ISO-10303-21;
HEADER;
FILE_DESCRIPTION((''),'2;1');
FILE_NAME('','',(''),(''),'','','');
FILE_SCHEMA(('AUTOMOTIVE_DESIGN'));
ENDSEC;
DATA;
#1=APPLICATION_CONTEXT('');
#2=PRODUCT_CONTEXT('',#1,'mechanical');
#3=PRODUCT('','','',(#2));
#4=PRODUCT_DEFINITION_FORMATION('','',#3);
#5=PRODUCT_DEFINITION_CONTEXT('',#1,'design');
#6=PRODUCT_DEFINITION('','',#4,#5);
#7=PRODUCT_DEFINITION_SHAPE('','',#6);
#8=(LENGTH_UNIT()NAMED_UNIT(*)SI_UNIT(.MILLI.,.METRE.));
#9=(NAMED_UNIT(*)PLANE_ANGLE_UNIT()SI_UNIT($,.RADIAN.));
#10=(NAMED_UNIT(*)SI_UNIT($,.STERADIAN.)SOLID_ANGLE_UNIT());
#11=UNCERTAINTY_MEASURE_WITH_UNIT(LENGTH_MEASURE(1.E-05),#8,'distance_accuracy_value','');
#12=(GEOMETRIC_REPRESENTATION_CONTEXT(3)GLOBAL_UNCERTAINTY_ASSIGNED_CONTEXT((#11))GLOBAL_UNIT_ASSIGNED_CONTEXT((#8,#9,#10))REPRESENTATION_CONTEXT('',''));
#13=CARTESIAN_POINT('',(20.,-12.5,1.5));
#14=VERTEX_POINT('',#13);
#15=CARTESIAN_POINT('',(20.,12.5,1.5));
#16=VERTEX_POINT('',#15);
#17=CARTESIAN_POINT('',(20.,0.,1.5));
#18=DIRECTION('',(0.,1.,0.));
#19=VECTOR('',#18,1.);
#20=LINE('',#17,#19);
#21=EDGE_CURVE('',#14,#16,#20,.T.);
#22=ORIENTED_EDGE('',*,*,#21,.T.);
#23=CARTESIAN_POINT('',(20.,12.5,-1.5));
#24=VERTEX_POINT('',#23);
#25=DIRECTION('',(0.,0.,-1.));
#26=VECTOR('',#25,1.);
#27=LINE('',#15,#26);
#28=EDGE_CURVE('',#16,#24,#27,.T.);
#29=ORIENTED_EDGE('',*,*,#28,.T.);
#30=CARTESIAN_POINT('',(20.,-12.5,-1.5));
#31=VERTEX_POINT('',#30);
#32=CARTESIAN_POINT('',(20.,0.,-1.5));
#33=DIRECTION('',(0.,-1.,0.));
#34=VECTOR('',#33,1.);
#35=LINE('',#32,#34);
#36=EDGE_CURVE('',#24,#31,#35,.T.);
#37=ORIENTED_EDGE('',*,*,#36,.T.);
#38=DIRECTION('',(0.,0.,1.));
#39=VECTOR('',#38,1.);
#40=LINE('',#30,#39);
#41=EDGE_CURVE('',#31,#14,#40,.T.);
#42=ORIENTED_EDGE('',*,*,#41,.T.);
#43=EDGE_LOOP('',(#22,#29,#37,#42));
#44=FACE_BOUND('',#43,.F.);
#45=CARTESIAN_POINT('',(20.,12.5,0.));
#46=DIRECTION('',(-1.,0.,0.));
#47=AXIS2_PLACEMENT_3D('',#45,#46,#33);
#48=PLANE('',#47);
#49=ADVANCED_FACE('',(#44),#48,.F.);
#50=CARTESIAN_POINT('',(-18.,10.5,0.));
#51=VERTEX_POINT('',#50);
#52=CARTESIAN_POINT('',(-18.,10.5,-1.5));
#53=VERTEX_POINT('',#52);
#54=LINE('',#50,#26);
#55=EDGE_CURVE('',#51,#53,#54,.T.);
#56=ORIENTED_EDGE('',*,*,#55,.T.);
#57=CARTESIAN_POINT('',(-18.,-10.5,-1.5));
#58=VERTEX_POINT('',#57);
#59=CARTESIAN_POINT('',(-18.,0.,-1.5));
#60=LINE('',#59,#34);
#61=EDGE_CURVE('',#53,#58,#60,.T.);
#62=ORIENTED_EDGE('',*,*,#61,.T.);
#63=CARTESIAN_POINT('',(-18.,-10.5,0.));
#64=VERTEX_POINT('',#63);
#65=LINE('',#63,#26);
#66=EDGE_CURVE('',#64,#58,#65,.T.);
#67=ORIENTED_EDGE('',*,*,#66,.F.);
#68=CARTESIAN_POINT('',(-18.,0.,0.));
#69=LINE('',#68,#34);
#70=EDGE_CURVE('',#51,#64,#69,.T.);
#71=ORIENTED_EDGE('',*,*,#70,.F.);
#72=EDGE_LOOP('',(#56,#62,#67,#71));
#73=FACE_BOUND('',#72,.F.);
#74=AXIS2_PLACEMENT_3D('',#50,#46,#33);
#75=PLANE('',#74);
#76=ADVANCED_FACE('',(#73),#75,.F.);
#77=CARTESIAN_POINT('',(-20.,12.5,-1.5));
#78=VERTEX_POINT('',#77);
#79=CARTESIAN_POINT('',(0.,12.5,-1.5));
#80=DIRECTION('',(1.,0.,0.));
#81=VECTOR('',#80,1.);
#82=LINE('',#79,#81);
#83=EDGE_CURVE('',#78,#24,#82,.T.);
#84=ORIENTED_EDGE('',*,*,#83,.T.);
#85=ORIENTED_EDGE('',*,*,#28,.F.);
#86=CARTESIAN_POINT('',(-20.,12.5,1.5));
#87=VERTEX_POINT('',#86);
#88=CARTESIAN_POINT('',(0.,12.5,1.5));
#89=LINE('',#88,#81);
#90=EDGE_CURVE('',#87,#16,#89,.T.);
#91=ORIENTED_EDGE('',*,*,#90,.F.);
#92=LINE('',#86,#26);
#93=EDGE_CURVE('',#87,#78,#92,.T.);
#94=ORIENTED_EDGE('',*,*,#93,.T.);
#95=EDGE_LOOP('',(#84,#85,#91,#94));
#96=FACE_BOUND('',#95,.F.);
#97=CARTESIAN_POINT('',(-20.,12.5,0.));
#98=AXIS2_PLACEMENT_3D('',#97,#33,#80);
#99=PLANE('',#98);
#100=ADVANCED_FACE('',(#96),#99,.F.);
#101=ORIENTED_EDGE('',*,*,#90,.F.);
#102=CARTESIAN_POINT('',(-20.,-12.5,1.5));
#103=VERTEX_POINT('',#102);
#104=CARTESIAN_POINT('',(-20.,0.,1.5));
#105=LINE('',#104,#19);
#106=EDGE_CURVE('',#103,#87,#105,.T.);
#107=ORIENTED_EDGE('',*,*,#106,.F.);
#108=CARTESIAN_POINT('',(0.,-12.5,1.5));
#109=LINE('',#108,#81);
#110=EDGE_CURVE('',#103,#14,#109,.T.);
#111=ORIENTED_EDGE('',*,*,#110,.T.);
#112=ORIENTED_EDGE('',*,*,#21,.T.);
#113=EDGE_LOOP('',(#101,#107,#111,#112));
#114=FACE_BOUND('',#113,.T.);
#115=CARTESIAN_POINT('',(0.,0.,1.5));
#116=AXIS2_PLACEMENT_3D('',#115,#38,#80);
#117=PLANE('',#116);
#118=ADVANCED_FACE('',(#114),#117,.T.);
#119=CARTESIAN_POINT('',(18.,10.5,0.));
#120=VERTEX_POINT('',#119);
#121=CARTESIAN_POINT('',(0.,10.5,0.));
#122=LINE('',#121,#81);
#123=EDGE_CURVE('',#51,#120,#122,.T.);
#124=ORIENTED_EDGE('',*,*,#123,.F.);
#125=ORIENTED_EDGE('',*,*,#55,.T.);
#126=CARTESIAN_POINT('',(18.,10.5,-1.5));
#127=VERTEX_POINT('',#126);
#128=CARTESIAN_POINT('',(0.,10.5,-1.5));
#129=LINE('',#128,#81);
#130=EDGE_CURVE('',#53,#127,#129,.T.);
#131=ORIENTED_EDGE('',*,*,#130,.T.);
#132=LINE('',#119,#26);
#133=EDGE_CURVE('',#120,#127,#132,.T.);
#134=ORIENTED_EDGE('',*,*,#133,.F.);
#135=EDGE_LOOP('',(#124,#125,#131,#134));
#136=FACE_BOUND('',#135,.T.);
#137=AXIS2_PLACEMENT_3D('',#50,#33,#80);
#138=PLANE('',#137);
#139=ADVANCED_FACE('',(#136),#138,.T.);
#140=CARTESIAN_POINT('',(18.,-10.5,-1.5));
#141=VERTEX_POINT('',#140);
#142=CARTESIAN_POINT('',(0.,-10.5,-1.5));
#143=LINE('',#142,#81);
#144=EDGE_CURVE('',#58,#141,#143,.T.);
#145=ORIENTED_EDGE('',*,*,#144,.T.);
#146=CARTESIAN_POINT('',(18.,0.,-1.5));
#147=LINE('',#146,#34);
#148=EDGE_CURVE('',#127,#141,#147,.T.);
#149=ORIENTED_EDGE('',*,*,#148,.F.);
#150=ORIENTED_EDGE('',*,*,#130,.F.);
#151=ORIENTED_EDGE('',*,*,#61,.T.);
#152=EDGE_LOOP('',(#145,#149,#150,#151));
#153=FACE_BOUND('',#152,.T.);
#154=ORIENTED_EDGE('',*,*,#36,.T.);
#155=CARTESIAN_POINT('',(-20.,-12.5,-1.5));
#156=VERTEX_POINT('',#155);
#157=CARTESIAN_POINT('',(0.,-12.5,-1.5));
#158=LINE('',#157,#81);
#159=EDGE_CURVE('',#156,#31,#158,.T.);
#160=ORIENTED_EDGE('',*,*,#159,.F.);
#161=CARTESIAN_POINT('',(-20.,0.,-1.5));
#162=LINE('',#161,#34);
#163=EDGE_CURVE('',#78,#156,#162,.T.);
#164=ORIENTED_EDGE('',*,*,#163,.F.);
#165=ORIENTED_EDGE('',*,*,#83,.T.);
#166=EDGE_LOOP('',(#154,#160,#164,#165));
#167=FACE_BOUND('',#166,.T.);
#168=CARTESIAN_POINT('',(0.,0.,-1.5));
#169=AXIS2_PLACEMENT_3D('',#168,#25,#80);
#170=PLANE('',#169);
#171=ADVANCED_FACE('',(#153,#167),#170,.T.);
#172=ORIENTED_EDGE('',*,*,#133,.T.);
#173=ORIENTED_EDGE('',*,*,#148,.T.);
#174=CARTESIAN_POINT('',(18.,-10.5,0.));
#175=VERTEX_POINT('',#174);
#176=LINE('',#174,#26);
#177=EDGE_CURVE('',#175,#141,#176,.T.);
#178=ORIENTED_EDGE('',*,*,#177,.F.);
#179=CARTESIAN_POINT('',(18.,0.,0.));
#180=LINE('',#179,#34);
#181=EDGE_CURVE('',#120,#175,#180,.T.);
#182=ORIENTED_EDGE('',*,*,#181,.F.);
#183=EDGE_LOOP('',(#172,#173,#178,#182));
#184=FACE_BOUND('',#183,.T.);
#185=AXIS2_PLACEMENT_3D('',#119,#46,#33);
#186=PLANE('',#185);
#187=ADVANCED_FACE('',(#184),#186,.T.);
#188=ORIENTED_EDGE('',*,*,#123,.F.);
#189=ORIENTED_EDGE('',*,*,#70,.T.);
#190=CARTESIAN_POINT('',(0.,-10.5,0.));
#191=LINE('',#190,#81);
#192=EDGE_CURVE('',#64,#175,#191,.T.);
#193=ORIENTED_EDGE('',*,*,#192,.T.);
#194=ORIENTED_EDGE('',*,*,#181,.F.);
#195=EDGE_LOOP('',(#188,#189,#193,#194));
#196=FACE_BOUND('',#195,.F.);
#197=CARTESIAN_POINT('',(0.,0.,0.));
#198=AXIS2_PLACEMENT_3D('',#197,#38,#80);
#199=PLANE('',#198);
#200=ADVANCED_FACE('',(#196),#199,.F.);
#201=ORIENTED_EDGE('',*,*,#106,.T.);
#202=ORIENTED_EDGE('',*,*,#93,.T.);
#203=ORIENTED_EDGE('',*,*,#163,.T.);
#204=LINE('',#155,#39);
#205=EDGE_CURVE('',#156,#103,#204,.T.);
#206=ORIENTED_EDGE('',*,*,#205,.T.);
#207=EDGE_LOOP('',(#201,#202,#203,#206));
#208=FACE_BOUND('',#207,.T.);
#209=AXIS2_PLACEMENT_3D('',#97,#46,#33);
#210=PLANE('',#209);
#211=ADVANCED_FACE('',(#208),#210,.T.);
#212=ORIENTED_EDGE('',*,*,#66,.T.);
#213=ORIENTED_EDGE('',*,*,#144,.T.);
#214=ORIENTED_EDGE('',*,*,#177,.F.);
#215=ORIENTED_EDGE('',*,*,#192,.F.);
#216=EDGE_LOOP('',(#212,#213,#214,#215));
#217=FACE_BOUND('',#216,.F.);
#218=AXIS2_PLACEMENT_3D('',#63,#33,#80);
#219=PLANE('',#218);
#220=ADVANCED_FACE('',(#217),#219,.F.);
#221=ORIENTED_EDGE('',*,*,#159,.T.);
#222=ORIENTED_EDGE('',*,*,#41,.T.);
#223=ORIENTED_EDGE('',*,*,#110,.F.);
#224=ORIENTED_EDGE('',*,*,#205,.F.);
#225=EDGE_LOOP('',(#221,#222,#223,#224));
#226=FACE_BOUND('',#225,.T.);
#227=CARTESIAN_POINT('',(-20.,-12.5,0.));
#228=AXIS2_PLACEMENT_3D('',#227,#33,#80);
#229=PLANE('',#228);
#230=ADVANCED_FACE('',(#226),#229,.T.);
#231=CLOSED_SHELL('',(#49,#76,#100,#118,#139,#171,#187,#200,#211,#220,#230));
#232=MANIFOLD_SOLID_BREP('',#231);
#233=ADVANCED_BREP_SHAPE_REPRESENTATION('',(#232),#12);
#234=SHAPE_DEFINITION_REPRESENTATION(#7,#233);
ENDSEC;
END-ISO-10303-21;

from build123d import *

# Parameters (mm, degrees)
F0_W     = 40
F0_H     = 25
F2_DEPTH = 1.5
F3_W     = 40
F3_H     = 25
F3_W_2   = 36
F3_H_2   = 21
F4_DEPTH = 1.5


# Not quite as in the source:
# - the program builds the solid bodies; features that only make, move or delete a surface that nothing else refers to are left out


with BuildPart() as f2:
    # F0 (on Top) → F2 (new body)
    with BuildSketch(Plane.XY):
        Rectangle(F0_W, F0_H)
    extrude(amount=F2_DEPTH)

    # F3 (on face) → F4 (join)
    with BuildSketch(Plane(origin=(0, 0, 0), x_dir=(1, 0, 0), z_dir=(0, 0, -1))):
        Rectangle(F3_W, F3_H)
        Rectangle(F3_W_2, F3_H_2, mode=Mode.SUBTRACT)
    extrude(amount=F4_DEPTH)


solid = f2.part
